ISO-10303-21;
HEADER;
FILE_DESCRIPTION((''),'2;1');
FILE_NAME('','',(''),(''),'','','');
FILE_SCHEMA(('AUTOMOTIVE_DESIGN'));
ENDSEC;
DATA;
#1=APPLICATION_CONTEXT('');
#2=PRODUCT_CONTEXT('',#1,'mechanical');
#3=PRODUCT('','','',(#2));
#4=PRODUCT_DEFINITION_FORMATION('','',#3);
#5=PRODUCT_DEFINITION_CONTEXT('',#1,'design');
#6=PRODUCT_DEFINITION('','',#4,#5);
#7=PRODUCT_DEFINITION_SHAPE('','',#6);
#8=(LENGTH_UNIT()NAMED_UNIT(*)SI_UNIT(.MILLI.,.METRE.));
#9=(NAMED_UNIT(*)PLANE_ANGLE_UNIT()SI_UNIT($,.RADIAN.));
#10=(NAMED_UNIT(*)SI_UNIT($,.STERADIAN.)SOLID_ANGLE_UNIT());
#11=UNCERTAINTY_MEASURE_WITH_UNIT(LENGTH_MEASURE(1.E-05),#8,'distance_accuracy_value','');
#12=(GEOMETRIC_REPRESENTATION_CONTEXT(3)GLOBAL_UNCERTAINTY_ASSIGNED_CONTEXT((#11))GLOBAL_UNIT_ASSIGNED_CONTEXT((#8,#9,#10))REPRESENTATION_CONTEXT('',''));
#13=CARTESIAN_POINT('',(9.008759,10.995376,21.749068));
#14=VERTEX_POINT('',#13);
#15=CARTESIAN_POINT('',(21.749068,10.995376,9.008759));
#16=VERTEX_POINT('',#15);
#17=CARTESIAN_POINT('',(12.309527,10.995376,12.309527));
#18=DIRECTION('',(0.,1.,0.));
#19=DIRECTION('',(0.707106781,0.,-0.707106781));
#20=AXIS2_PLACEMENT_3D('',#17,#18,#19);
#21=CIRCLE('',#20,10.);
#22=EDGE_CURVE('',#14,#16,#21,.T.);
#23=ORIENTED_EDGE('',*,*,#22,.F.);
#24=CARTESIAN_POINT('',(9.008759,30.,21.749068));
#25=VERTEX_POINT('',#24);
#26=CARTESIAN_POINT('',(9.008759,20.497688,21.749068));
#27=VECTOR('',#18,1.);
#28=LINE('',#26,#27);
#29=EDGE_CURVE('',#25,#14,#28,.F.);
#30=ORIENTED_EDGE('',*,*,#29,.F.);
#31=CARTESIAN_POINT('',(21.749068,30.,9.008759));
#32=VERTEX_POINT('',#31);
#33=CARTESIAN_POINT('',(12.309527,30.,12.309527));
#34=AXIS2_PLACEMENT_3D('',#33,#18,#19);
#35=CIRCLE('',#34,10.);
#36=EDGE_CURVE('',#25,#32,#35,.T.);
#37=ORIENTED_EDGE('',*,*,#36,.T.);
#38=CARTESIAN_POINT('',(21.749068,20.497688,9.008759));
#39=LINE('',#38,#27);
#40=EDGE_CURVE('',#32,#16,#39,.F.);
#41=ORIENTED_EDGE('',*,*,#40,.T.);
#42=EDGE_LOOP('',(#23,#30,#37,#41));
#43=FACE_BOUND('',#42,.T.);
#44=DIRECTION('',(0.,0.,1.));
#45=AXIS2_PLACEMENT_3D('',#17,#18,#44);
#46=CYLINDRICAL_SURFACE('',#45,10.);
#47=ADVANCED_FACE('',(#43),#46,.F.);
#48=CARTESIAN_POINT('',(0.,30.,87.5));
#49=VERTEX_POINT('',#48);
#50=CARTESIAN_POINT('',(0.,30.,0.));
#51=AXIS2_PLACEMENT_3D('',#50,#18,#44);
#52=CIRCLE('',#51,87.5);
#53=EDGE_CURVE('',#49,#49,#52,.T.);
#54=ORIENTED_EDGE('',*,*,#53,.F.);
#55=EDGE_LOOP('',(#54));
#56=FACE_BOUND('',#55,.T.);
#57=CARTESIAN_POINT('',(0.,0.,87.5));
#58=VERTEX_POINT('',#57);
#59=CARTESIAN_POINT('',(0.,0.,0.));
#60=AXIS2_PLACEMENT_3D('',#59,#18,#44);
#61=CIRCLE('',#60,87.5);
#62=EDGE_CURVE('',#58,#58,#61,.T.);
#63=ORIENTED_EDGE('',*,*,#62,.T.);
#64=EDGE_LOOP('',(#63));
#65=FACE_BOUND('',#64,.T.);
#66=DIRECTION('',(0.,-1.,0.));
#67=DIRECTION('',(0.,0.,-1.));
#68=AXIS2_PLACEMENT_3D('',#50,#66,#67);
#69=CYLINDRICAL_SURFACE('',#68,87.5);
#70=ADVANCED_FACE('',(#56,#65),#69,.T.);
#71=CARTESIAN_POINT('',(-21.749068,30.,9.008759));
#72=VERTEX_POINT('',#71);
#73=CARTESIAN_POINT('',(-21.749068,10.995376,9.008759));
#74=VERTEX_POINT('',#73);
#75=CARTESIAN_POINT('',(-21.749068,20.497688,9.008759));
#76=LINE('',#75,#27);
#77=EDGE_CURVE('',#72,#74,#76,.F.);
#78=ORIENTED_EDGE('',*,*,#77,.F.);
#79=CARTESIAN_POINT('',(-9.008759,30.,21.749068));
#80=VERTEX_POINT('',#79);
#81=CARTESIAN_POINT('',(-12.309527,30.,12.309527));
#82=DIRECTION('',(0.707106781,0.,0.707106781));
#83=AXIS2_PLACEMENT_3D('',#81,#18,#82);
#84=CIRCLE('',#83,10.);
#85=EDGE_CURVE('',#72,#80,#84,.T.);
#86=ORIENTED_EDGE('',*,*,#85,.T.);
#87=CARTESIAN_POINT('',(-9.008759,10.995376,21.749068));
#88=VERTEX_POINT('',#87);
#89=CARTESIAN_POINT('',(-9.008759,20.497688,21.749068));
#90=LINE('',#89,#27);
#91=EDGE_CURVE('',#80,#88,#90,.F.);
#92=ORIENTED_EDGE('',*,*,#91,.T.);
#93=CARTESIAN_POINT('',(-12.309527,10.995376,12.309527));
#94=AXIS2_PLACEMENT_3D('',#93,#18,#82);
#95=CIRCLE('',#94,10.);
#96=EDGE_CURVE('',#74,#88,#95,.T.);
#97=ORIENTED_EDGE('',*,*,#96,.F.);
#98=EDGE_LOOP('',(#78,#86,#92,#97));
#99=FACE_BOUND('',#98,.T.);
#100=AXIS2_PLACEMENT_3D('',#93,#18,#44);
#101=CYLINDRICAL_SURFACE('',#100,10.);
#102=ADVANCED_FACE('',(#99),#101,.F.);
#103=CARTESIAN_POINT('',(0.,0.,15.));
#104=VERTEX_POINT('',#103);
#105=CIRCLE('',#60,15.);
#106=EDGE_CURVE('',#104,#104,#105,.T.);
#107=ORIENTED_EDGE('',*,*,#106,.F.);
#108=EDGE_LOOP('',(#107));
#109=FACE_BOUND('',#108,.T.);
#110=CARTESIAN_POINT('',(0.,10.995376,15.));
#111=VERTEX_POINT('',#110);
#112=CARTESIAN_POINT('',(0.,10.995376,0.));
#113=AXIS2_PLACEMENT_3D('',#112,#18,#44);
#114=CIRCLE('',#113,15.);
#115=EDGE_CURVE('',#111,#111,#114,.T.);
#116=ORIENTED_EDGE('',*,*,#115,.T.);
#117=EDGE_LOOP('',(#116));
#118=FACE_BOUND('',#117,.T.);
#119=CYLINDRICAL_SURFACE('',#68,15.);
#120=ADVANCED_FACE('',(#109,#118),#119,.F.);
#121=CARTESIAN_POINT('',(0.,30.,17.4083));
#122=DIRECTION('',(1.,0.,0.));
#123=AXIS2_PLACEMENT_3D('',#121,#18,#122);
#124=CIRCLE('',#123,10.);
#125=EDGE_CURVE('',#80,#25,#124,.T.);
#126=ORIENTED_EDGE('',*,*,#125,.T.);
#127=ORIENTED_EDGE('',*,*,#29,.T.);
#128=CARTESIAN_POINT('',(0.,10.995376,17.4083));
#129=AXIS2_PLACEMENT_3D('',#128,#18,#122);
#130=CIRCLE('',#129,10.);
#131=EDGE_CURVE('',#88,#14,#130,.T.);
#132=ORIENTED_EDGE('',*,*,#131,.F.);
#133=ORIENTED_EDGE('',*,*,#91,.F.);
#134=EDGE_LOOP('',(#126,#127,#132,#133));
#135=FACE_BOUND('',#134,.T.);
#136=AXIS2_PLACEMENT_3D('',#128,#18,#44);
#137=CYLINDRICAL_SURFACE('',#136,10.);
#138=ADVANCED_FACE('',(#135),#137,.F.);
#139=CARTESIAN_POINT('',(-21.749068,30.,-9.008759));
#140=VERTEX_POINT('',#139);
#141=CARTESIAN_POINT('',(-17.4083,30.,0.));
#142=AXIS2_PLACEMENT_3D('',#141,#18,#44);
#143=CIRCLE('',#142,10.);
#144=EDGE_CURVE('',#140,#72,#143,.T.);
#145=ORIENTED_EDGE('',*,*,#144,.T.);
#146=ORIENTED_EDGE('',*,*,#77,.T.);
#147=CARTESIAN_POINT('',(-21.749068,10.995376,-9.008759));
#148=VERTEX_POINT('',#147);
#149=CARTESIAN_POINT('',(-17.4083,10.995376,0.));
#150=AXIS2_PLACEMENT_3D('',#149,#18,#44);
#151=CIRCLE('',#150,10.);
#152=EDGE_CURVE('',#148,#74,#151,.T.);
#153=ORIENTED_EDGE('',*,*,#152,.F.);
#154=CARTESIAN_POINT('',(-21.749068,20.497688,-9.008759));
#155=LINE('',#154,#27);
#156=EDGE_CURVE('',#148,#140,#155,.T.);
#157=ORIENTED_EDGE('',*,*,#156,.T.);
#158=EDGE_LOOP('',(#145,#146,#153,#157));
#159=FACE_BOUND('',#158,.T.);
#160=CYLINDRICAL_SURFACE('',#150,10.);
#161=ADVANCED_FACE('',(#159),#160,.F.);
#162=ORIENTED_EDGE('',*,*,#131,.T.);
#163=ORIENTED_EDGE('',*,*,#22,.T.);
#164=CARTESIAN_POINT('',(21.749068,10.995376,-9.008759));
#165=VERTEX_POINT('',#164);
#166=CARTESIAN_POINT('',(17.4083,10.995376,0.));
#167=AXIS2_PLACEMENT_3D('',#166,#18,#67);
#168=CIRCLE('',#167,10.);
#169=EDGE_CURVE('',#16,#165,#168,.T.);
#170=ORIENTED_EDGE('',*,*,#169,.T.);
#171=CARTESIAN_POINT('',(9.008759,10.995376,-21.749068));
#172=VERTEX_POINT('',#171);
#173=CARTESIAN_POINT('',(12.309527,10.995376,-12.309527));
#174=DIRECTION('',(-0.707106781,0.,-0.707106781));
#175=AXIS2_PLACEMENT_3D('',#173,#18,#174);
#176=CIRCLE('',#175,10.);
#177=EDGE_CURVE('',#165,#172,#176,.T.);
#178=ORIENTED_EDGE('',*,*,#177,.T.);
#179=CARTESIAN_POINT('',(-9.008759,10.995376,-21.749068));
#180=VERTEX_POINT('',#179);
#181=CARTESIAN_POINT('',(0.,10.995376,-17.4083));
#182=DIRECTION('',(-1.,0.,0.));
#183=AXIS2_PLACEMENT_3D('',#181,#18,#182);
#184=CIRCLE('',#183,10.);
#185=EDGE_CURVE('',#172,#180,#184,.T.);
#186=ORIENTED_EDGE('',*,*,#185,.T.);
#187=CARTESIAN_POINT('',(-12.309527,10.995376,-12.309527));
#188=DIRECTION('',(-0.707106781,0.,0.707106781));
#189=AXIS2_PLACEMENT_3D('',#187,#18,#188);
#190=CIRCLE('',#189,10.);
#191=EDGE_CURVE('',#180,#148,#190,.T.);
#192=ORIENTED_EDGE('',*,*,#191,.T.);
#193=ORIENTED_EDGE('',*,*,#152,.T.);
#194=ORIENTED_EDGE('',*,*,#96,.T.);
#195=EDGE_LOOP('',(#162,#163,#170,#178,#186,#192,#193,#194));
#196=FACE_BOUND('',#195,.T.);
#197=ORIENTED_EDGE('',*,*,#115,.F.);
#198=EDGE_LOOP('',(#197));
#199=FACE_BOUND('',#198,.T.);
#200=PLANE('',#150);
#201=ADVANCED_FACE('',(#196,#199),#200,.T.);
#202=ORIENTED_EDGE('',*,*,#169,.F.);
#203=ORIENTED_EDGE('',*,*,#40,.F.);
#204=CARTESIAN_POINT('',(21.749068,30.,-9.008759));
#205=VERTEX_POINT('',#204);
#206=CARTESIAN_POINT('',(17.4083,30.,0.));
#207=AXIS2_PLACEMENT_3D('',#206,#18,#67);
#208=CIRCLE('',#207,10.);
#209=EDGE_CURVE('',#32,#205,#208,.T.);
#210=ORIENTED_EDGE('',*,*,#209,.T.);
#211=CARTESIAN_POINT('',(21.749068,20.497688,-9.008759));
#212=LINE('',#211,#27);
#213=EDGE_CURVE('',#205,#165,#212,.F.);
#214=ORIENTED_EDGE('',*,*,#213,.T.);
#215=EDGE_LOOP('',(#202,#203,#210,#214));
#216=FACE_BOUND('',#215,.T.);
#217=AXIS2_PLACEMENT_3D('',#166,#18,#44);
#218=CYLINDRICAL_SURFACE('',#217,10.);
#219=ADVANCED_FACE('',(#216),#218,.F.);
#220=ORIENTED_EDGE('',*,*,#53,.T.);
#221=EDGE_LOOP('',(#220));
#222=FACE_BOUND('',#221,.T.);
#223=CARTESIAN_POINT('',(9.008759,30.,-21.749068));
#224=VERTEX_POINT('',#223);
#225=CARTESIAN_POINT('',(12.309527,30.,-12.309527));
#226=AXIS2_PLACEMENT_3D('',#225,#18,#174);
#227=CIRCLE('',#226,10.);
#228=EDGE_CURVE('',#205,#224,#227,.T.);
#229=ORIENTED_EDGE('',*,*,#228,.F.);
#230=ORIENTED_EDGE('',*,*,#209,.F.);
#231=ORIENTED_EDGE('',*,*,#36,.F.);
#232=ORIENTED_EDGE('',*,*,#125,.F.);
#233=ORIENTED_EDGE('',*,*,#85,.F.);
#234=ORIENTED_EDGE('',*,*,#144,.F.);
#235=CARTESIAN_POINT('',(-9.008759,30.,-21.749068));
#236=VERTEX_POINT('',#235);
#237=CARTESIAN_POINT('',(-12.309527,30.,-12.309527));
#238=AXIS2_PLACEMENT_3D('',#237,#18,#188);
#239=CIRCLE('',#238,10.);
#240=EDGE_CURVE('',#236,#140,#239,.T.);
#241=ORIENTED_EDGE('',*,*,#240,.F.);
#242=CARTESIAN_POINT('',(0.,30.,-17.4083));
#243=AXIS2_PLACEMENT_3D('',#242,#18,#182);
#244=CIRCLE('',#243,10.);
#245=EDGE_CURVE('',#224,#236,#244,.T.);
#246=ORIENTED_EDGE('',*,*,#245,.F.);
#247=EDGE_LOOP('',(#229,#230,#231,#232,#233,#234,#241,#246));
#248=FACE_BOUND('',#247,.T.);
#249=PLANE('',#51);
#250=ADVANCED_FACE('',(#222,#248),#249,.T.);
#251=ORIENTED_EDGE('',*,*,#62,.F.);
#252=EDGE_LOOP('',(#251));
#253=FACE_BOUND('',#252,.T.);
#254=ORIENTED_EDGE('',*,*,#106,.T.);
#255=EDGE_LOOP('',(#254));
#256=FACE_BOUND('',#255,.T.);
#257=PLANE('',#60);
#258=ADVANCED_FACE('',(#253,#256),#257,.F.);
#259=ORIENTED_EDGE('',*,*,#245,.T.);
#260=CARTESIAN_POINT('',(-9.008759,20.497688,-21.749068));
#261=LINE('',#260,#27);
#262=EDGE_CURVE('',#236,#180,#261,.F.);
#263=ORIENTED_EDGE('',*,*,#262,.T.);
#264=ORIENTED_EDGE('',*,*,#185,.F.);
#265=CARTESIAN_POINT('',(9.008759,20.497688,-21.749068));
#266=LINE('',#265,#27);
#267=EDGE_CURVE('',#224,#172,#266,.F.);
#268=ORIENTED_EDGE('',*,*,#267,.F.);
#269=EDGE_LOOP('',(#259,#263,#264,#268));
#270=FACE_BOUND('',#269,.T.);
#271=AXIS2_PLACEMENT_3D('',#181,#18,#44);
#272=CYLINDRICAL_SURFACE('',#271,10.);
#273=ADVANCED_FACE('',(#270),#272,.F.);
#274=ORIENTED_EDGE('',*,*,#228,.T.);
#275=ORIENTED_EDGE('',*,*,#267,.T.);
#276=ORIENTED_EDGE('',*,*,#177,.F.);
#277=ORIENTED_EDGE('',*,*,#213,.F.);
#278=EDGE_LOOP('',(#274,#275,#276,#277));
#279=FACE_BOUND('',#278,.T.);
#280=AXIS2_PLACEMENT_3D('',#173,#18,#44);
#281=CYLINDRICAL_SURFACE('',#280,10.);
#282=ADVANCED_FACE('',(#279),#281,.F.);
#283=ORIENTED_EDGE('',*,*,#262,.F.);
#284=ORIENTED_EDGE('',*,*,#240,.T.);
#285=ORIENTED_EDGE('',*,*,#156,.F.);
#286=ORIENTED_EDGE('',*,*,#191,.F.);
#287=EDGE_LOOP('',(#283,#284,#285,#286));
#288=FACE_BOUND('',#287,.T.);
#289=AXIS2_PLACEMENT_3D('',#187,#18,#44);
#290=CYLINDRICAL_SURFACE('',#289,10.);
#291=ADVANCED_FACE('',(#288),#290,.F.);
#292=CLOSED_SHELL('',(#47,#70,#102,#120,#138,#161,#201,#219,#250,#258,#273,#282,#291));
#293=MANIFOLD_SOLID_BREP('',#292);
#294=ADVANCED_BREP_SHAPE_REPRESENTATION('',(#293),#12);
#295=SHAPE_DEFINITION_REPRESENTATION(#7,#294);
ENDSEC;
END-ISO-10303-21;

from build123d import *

# Parameters (mm, degrees)
SKETCH1_R           = 87.5
BOSS_EXTRUDE1_DEPTH = 30
SKETCH2_R           = 15
CUT_EXTRUDE1_DEPTH  = 128.328315782
SKETCH3_R           = 10
CUT_EXTRUDE2_DEPTH  = 19.004624125
CIRPATTERN1_COUNT   = 8


with BuildPart() as part:
    # Sketch1 → Boss-Extrude1 (new body)
    with BuildSketch(Plane(origin=(0, 0, 0), x_dir=(1, 0, 0), z_dir=(0, 1, 0))):
        Circle(SKETCH1_R)
    extrude(amount=BOSS_EXTRUDE1_DEPTH)

    # Sketch2 → Cut-Extrude1 (cut, through all)
    with BuildSketch(Plane(origin=(0, 0, 0), x_dir=(1, 0, 0), z_dir=(0, 1, 0))):
        Circle(SKETCH2_R)
    extrude(amount=CUT_EXTRUDE1_DEPTH, mode=Mode.SUBTRACT)

    # Sketch3 → Cut-Extrude2 (cut)
    with BuildSketch(Plane(origin=(0, 30, 0), x_dir=(1, 0, 0), z_dir=(0, 1, 0))):
        with Locations((-17.408300276, 0)):
            Circle(SKETCH3_R)
    cut_extrude2 = extrude(amount=-CUT_EXTRUDE2_DEPTH, mode=Mode.SUBTRACT)

    # CirPattern1: Cut-Extrude2 ×8 about axis
    cirpattern1_axis = Axis((0, 0, 0), (0, 1, 0))
    for i in range(1, CIRPATTERN1_COUNT):
        add(cut_extrude2.rotate(cirpattern1_axis, i * 360 / CIRPATTERN1_COUNT), mode=Mode.SUBTRACT)


solid = part.part
